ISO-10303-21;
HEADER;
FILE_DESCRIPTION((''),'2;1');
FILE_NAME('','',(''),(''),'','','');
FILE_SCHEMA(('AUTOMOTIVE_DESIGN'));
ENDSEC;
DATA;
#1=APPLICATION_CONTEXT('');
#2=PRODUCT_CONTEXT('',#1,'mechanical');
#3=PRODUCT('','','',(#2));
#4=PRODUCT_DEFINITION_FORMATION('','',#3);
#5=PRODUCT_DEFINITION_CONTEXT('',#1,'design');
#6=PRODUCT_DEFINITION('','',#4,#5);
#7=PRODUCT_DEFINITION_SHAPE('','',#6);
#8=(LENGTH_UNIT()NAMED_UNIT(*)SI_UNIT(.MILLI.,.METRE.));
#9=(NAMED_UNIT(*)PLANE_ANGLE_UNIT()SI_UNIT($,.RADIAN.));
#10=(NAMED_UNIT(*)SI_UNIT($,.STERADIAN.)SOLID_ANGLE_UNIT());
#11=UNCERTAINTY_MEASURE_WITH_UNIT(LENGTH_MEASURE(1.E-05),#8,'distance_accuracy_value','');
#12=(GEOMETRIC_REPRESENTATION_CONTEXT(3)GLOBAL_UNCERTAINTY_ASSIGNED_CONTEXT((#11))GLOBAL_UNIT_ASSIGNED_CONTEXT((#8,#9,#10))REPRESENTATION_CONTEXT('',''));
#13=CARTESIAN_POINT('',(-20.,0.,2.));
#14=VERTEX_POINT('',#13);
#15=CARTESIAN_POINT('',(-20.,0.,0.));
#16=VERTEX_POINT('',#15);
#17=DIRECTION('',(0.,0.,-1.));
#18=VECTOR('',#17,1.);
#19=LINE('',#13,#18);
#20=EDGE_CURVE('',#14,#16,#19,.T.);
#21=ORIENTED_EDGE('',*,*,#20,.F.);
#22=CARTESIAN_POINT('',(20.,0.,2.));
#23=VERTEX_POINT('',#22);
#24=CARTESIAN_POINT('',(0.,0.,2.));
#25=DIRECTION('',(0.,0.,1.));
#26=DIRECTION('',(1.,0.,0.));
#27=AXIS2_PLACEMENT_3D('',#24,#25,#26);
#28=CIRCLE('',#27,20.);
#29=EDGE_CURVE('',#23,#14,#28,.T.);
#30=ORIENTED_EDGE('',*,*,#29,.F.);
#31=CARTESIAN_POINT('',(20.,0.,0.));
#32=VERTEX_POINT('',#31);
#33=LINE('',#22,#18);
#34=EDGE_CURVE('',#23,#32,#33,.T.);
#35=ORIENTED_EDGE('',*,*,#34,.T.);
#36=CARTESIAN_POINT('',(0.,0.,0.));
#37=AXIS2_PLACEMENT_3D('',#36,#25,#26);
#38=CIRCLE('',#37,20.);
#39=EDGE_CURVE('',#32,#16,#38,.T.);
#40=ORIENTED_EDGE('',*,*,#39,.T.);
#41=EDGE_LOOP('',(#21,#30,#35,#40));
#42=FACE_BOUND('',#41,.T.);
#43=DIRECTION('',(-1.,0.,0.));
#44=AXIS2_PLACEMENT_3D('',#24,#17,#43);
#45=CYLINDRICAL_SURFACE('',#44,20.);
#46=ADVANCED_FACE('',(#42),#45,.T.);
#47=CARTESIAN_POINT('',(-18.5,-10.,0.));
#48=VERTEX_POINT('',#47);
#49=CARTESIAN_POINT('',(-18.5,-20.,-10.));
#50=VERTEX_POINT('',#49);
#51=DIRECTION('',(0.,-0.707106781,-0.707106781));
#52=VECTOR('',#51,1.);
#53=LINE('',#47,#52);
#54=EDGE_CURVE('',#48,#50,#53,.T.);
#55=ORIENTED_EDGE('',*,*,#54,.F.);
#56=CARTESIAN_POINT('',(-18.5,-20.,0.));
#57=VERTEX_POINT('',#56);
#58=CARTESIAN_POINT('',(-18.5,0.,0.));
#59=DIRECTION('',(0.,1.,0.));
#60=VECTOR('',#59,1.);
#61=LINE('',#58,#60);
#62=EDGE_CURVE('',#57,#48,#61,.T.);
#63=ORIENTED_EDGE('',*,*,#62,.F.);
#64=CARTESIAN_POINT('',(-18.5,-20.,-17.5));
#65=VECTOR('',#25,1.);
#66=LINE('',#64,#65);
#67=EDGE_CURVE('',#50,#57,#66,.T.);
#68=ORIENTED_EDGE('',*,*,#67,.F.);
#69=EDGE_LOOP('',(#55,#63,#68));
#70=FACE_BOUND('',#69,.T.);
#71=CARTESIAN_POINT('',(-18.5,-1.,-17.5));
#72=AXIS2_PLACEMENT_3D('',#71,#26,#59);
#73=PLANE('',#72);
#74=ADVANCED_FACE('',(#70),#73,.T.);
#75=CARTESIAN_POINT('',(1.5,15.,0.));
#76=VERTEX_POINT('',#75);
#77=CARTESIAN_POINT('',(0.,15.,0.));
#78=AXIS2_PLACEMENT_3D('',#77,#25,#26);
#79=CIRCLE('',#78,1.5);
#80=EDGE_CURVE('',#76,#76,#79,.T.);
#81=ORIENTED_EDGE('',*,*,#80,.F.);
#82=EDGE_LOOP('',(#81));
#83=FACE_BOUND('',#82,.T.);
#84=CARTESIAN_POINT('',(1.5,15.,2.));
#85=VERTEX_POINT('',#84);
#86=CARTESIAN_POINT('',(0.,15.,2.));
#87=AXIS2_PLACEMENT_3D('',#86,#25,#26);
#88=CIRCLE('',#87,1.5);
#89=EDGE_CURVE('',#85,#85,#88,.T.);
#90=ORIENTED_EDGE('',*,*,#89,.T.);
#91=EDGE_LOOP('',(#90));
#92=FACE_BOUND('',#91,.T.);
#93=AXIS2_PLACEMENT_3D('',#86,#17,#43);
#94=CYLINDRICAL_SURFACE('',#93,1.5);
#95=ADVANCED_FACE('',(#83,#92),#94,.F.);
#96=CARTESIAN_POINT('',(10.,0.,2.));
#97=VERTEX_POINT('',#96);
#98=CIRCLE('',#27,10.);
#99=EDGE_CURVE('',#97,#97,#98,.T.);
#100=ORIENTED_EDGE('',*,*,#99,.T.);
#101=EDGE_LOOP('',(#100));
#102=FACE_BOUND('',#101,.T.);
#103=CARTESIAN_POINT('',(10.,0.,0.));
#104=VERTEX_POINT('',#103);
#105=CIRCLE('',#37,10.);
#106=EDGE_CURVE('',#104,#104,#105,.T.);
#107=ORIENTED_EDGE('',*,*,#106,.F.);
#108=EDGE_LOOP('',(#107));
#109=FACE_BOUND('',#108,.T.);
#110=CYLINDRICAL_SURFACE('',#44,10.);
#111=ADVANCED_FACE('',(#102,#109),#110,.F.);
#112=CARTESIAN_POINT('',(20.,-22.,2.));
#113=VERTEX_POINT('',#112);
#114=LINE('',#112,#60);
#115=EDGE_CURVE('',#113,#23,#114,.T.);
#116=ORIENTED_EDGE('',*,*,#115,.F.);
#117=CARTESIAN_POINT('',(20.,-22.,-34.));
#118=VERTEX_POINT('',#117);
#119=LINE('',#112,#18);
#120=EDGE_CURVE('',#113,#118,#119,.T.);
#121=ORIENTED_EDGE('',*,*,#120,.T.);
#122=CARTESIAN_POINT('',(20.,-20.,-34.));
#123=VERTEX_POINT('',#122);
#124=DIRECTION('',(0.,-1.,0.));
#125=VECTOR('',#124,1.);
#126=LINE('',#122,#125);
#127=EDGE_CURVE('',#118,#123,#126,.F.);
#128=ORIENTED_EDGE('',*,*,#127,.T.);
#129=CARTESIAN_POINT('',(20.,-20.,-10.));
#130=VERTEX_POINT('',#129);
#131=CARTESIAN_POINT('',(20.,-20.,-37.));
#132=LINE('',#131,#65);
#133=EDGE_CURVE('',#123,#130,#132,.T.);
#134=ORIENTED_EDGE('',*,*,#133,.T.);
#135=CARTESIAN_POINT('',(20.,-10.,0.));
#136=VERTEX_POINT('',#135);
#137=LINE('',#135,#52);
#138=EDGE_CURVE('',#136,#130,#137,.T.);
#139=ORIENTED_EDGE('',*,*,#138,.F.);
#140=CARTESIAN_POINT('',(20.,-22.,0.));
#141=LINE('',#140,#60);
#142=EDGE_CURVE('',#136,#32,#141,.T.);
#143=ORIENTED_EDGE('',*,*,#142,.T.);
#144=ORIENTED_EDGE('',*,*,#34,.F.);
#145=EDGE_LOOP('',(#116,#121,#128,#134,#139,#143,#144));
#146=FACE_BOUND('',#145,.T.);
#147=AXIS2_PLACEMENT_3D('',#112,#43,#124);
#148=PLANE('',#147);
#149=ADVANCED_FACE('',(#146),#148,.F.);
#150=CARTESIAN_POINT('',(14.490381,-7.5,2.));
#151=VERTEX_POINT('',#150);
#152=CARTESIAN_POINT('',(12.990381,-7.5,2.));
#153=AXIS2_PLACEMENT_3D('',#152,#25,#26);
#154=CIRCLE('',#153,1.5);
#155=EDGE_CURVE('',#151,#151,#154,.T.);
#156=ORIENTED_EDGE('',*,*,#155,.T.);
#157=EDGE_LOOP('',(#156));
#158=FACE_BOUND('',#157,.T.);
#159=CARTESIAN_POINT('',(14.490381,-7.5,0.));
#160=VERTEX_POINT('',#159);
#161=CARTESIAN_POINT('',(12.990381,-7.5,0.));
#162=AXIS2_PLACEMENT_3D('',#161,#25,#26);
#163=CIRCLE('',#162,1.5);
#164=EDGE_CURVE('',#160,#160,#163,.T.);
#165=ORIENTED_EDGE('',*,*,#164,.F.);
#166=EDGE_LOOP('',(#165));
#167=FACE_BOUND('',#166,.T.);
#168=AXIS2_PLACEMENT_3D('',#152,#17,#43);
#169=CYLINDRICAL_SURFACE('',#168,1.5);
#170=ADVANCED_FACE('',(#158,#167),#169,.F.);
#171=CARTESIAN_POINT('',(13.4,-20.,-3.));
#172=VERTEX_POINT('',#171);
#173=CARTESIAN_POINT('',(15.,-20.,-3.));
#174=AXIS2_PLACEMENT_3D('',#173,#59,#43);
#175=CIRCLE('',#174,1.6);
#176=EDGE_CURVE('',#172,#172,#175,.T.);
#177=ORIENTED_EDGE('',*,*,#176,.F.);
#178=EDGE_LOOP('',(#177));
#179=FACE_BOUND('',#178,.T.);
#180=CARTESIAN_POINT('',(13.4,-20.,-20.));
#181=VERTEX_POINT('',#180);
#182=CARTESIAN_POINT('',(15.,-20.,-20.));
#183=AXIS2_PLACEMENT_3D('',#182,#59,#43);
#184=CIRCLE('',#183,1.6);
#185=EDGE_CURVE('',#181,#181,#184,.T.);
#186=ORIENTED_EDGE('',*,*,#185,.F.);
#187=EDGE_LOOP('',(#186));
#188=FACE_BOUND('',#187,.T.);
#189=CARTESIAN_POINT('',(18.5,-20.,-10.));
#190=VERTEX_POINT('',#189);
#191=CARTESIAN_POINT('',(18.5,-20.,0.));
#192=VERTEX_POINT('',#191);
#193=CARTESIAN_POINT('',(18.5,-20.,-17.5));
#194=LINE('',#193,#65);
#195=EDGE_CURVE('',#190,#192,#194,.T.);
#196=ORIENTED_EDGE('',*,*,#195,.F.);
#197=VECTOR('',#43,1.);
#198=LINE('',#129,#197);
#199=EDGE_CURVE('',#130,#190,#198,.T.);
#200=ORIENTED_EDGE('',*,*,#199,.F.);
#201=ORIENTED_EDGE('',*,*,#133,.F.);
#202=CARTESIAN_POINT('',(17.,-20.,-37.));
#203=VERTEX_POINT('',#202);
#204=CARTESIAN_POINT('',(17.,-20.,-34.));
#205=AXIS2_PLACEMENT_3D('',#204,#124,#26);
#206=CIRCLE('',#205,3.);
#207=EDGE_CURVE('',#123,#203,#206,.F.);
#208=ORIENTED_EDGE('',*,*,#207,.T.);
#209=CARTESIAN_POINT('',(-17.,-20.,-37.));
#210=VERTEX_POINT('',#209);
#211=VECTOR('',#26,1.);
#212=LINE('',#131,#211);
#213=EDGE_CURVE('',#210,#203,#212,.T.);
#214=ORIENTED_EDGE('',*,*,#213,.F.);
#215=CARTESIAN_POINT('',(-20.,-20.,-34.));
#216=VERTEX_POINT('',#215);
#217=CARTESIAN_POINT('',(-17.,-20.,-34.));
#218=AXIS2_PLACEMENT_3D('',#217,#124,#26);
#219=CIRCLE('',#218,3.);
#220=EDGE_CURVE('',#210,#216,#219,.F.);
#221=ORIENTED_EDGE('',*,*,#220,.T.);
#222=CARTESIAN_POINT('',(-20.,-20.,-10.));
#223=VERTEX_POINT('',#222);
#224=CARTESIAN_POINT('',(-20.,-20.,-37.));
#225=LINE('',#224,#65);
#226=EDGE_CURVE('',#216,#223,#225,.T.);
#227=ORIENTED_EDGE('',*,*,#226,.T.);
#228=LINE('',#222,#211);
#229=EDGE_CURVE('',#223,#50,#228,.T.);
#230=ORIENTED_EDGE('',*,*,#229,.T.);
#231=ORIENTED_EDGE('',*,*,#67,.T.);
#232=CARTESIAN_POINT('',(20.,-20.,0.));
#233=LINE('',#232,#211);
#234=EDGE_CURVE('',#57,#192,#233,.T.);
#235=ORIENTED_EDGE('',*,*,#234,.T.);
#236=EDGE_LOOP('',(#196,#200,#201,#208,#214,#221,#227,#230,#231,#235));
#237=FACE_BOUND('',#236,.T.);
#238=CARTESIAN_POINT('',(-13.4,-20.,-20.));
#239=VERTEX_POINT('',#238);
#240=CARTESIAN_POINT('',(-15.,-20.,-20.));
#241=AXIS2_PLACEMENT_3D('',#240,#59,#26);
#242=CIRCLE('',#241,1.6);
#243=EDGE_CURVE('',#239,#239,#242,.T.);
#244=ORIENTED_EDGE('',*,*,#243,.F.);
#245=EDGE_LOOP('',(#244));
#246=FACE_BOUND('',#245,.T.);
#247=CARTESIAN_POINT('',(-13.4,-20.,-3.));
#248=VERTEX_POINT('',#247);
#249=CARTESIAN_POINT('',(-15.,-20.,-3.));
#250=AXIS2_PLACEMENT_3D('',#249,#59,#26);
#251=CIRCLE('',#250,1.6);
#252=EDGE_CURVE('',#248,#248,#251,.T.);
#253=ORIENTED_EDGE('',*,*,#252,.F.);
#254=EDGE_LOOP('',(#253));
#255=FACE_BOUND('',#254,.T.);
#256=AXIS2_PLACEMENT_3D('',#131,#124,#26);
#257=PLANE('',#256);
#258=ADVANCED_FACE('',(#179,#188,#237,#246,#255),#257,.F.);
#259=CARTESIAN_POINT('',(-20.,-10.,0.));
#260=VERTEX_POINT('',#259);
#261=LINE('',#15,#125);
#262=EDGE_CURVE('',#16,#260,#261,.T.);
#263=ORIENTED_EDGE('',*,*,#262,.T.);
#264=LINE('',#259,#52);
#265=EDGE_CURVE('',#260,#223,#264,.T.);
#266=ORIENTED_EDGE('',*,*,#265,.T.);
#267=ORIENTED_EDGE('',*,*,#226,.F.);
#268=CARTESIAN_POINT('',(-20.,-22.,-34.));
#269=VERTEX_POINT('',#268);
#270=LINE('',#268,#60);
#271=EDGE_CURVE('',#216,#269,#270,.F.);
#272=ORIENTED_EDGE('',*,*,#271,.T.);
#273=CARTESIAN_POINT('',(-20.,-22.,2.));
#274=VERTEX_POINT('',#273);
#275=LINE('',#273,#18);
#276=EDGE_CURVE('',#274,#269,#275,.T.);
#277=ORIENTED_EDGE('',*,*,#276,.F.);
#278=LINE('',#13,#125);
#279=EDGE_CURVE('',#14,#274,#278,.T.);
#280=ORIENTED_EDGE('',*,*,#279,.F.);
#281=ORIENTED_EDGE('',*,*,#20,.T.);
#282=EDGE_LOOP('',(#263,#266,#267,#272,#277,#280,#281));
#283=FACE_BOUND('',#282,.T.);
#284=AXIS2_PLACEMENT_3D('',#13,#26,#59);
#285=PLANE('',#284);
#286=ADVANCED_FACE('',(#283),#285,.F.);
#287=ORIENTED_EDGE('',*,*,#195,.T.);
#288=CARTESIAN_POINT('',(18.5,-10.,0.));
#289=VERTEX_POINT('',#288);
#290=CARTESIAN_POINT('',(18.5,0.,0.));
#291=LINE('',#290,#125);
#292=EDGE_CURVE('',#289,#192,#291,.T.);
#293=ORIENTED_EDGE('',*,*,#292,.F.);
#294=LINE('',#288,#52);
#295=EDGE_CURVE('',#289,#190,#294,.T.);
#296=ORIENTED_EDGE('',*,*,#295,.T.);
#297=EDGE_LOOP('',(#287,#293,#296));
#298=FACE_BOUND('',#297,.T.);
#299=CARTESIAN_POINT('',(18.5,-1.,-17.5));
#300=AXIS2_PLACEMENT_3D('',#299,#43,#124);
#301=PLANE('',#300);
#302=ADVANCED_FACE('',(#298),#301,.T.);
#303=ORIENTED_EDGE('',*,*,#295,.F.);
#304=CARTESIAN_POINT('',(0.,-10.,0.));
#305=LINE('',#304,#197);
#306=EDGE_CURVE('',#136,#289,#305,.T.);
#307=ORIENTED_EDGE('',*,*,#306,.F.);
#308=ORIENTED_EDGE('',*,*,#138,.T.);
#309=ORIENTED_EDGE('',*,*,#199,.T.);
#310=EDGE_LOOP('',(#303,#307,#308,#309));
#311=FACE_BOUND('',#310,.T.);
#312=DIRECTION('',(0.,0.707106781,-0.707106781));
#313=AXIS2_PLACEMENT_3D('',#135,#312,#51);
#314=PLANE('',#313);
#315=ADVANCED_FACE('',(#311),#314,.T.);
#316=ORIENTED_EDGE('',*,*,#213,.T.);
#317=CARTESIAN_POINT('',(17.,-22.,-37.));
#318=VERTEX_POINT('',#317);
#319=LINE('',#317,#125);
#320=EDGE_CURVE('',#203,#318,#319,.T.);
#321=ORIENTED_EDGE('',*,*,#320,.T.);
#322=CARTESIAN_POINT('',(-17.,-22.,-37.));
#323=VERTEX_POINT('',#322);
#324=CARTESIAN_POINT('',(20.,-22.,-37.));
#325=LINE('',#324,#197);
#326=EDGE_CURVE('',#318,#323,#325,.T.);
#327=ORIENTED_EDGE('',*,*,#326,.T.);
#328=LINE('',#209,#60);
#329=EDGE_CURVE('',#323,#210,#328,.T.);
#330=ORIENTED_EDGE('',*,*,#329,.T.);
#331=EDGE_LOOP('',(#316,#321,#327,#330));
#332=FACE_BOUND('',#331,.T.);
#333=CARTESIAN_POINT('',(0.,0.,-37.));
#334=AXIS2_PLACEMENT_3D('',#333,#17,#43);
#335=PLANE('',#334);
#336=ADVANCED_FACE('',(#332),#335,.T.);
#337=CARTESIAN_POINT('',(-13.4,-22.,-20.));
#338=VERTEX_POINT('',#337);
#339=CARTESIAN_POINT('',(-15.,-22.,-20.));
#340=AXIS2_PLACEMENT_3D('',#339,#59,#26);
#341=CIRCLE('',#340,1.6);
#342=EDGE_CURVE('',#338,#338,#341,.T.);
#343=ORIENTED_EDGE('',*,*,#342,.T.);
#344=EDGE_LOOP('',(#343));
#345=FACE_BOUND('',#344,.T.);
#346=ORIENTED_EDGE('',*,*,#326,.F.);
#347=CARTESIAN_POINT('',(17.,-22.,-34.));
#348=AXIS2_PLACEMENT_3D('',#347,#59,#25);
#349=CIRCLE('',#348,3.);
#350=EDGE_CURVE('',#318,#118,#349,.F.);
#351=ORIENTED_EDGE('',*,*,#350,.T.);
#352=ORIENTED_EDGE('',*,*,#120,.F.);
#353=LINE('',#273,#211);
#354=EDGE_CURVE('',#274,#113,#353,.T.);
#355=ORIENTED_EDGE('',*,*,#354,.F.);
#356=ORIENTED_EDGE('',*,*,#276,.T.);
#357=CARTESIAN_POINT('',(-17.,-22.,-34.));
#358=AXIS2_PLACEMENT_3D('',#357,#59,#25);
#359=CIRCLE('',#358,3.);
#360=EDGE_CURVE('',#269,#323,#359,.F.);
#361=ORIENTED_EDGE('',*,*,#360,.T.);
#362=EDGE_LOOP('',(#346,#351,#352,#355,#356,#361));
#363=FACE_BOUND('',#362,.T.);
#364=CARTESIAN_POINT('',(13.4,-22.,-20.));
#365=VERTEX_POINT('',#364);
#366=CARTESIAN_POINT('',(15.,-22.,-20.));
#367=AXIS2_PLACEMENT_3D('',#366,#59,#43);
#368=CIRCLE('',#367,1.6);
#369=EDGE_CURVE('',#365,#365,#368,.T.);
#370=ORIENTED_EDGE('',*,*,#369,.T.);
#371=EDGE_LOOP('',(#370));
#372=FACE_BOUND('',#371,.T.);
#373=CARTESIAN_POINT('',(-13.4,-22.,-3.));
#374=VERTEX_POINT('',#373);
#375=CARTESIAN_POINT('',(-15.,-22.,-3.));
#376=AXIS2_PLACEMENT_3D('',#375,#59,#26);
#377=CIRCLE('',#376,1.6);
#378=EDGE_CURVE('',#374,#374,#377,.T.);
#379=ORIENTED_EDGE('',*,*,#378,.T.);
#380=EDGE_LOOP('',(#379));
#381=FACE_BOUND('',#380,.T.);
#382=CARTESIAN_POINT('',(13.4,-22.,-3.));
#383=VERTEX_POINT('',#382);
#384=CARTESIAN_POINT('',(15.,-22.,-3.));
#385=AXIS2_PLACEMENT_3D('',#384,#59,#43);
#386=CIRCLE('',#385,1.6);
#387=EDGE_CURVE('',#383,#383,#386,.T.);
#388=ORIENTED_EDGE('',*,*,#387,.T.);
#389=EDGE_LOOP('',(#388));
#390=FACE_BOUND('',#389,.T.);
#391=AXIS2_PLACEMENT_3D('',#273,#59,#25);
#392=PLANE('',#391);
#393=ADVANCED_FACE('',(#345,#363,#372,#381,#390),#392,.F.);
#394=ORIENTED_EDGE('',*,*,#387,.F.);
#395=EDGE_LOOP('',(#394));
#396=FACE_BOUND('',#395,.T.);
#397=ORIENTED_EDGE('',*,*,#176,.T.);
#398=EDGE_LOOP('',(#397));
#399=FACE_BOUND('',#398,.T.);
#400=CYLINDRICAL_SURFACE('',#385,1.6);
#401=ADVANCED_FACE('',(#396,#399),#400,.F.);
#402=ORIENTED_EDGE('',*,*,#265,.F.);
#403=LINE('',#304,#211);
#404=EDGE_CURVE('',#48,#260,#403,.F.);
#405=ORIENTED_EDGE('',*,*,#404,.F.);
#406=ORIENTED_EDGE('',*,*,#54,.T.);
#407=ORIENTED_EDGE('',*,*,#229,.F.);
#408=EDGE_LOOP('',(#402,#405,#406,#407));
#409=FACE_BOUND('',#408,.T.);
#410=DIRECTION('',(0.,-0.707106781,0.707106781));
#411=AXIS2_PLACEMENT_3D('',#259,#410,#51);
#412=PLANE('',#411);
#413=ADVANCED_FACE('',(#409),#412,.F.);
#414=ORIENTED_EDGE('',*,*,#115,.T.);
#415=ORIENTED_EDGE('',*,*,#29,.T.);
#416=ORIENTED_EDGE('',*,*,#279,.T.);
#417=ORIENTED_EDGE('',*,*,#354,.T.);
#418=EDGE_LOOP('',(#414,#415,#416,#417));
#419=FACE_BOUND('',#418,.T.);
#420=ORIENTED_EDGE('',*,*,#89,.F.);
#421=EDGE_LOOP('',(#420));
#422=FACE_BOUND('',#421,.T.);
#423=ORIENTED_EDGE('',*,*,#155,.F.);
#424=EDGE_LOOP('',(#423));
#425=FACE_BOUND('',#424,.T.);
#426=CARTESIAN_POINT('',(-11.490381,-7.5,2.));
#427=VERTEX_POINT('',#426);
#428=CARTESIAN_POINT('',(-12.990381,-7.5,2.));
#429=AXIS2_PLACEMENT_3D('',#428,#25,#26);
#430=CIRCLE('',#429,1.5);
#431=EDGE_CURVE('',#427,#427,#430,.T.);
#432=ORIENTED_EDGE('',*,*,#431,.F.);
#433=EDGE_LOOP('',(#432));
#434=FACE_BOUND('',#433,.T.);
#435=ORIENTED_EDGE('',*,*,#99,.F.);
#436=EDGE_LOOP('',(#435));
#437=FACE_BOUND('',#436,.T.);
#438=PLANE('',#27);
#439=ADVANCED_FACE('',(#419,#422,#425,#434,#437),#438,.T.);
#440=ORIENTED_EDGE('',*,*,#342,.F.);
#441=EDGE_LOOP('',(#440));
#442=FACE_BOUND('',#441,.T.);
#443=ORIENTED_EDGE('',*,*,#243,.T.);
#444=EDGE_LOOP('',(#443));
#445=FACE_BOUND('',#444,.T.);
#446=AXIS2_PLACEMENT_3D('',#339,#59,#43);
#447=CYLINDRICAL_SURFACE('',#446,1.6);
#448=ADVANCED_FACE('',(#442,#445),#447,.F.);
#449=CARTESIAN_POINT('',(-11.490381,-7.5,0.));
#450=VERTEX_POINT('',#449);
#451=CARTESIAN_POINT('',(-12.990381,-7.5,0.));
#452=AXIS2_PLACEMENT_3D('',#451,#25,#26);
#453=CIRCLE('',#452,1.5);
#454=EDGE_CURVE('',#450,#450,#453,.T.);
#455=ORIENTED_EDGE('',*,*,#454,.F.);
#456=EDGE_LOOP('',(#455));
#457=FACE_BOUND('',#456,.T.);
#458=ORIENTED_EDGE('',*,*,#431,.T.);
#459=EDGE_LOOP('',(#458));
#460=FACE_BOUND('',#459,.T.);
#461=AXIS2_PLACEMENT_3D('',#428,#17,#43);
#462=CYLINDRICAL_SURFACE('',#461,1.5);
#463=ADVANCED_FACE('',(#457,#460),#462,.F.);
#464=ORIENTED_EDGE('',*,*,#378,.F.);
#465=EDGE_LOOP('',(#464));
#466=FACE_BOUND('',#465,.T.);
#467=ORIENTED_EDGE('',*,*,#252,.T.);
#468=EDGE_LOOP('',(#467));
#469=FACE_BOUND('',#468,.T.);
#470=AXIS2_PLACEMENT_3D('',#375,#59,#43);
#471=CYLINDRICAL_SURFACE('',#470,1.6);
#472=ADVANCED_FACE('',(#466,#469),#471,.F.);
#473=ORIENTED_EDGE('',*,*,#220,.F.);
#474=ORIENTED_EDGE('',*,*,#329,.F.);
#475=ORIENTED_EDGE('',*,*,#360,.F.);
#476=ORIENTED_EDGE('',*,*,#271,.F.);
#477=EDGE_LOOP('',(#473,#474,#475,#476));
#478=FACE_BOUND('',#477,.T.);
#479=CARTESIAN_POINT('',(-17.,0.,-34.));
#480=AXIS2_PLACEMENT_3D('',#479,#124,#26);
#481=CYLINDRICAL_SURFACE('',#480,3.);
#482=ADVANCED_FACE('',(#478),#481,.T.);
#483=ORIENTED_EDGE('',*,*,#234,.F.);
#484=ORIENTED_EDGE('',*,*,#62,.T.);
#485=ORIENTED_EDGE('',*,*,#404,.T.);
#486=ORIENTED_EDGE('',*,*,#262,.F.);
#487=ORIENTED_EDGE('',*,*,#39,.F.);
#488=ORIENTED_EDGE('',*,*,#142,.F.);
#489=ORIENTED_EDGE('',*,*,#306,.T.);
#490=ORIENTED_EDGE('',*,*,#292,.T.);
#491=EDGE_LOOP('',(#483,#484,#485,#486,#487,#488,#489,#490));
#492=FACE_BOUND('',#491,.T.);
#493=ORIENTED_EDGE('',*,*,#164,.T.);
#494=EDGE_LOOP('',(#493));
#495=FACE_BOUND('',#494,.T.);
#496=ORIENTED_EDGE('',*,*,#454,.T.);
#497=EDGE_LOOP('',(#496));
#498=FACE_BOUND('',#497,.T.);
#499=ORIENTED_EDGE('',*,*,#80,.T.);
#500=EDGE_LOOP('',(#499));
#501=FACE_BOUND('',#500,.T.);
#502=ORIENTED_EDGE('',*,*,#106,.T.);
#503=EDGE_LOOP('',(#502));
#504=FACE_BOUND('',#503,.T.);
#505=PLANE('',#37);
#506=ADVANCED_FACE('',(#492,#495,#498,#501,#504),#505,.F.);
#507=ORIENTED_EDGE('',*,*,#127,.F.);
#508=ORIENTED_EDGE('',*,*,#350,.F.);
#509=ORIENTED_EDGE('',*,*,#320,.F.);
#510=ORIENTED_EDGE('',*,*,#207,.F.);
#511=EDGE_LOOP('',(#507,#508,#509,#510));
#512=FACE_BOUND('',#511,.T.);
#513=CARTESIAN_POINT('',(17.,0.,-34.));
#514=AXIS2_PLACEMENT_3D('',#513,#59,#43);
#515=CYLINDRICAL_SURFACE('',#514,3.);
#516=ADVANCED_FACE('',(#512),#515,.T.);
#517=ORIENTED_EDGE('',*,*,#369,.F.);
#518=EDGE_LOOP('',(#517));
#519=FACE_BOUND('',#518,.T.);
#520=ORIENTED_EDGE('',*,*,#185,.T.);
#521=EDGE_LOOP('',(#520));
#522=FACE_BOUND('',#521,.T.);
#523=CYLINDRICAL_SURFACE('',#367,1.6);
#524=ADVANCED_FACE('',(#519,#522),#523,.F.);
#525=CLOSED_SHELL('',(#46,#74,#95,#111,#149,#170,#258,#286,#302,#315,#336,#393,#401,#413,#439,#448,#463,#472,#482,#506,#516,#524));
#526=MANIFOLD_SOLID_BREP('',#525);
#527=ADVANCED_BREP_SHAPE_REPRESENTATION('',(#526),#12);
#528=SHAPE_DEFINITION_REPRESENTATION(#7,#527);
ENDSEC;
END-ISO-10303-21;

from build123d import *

# Parameters (mm, degrees)
SKETCH1_R           = 1.5
SKETCH1_R_2         = 10
BOSS_EXTRUDE1_DEPTH = 2
SKETCH2_W           = 40
SKETCH2_H           = 2
BOSS_EXTRUDE2_DEPTH = 37
FILLET1_R           = 3
SKETCH3_R           = 1.6
CUT_EXTRUDE1_DEPTH  = 59.043087444
RIB2_DEPTH          = 1.5


# Read off the part's stored shape, not the designer's step: Rib2
with BuildPart() as part:
    # Sketch1 → Boss-Extrude1 (new body)
    with BuildSketch(Plane.XY):
        with BuildLine():
            Line((-20, 0), (-20, -22))
            Line((-20, -22), (20, -22))
            Line((20, -22), (20, 0))
            ThreePointArc((20, 0), (0, 20), (-20, 0))
        make_face()
        with Locations((0, 15)):
            Circle(SKETCH1_R, mode=Mode.SUBTRACT)
        with Locations((12.990381057, -7.5)):
            Circle(SKETCH1_R, mode=Mode.SUBTRACT)
        with Locations((-12.990381057, -7.5)):
            Circle(SKETCH1_R, mode=Mode.SUBTRACT)
        Circle(SKETCH1_R_2, mode=Mode.SUBTRACT)
    extrude(amount=BOSS_EXTRUDE1_DEPTH)

    # Sketch2 → Boss-Extrude2 (add)
    with BuildSketch(Plane(origin=(0, 0, 0), x_dir=(-1, 0, 0), z_dir=(0, 0, -1))):
        with Locations((0, -21)):
            Rectangle(SKETCH2_W, SKETCH2_H)
    extrude(amount=BOSS_EXTRUDE2_DEPTH)

    # Fillet1
    fillet1_edges = [part.edges().sort_by_distance(p)[0] for p in [
        (-20, -21, -37),
        (20, -21, -37),
    ]]
    fillet(fillet1_edges, radius=FILLET1_R)

    # Sketch3 → Cut-Extrude1 (cut, through all)
    with BuildSketch(Plane(origin=(0, -20, 0), x_dir=(1, 0, 0), z_dir=(0, 1, 0))):
        with Locations(Location((15, 20, 0), (0, 0, 180))):
            Circle(SKETCH3_R)
        with Locations(Location((15, 3, 0), (0, 0, 180))):
            Circle(SKETCH3_R)
        with Locations((-15, 3)):
            Circle(SKETCH3_R)
        with Locations((-15, 20)):
            Circle(SKETCH3_R)
    extrude(amount=-CUT_EXTRUDE1_DEPTH, mode=Mode.SUBTRACT)

    # Rib2 outline → Rib2 (add)
    with BuildSketch(Plane(origin=(-20, 0, 0), x_dir=(0, 0, -1), z_dir=(1, 0, 0))):
        Polygon((10, -20), (0, -10), (0, -20), align=None)
    rib2 = extrude(amount=RIB2_DEPTH)

    # Mirror1: Rib2 across plane
    add(rib2.mirror(Plane(origin=(0, 0, 0), x_dir=(0, 0, 1), z_dir=(1, 0, 0))))


solid = part.part
